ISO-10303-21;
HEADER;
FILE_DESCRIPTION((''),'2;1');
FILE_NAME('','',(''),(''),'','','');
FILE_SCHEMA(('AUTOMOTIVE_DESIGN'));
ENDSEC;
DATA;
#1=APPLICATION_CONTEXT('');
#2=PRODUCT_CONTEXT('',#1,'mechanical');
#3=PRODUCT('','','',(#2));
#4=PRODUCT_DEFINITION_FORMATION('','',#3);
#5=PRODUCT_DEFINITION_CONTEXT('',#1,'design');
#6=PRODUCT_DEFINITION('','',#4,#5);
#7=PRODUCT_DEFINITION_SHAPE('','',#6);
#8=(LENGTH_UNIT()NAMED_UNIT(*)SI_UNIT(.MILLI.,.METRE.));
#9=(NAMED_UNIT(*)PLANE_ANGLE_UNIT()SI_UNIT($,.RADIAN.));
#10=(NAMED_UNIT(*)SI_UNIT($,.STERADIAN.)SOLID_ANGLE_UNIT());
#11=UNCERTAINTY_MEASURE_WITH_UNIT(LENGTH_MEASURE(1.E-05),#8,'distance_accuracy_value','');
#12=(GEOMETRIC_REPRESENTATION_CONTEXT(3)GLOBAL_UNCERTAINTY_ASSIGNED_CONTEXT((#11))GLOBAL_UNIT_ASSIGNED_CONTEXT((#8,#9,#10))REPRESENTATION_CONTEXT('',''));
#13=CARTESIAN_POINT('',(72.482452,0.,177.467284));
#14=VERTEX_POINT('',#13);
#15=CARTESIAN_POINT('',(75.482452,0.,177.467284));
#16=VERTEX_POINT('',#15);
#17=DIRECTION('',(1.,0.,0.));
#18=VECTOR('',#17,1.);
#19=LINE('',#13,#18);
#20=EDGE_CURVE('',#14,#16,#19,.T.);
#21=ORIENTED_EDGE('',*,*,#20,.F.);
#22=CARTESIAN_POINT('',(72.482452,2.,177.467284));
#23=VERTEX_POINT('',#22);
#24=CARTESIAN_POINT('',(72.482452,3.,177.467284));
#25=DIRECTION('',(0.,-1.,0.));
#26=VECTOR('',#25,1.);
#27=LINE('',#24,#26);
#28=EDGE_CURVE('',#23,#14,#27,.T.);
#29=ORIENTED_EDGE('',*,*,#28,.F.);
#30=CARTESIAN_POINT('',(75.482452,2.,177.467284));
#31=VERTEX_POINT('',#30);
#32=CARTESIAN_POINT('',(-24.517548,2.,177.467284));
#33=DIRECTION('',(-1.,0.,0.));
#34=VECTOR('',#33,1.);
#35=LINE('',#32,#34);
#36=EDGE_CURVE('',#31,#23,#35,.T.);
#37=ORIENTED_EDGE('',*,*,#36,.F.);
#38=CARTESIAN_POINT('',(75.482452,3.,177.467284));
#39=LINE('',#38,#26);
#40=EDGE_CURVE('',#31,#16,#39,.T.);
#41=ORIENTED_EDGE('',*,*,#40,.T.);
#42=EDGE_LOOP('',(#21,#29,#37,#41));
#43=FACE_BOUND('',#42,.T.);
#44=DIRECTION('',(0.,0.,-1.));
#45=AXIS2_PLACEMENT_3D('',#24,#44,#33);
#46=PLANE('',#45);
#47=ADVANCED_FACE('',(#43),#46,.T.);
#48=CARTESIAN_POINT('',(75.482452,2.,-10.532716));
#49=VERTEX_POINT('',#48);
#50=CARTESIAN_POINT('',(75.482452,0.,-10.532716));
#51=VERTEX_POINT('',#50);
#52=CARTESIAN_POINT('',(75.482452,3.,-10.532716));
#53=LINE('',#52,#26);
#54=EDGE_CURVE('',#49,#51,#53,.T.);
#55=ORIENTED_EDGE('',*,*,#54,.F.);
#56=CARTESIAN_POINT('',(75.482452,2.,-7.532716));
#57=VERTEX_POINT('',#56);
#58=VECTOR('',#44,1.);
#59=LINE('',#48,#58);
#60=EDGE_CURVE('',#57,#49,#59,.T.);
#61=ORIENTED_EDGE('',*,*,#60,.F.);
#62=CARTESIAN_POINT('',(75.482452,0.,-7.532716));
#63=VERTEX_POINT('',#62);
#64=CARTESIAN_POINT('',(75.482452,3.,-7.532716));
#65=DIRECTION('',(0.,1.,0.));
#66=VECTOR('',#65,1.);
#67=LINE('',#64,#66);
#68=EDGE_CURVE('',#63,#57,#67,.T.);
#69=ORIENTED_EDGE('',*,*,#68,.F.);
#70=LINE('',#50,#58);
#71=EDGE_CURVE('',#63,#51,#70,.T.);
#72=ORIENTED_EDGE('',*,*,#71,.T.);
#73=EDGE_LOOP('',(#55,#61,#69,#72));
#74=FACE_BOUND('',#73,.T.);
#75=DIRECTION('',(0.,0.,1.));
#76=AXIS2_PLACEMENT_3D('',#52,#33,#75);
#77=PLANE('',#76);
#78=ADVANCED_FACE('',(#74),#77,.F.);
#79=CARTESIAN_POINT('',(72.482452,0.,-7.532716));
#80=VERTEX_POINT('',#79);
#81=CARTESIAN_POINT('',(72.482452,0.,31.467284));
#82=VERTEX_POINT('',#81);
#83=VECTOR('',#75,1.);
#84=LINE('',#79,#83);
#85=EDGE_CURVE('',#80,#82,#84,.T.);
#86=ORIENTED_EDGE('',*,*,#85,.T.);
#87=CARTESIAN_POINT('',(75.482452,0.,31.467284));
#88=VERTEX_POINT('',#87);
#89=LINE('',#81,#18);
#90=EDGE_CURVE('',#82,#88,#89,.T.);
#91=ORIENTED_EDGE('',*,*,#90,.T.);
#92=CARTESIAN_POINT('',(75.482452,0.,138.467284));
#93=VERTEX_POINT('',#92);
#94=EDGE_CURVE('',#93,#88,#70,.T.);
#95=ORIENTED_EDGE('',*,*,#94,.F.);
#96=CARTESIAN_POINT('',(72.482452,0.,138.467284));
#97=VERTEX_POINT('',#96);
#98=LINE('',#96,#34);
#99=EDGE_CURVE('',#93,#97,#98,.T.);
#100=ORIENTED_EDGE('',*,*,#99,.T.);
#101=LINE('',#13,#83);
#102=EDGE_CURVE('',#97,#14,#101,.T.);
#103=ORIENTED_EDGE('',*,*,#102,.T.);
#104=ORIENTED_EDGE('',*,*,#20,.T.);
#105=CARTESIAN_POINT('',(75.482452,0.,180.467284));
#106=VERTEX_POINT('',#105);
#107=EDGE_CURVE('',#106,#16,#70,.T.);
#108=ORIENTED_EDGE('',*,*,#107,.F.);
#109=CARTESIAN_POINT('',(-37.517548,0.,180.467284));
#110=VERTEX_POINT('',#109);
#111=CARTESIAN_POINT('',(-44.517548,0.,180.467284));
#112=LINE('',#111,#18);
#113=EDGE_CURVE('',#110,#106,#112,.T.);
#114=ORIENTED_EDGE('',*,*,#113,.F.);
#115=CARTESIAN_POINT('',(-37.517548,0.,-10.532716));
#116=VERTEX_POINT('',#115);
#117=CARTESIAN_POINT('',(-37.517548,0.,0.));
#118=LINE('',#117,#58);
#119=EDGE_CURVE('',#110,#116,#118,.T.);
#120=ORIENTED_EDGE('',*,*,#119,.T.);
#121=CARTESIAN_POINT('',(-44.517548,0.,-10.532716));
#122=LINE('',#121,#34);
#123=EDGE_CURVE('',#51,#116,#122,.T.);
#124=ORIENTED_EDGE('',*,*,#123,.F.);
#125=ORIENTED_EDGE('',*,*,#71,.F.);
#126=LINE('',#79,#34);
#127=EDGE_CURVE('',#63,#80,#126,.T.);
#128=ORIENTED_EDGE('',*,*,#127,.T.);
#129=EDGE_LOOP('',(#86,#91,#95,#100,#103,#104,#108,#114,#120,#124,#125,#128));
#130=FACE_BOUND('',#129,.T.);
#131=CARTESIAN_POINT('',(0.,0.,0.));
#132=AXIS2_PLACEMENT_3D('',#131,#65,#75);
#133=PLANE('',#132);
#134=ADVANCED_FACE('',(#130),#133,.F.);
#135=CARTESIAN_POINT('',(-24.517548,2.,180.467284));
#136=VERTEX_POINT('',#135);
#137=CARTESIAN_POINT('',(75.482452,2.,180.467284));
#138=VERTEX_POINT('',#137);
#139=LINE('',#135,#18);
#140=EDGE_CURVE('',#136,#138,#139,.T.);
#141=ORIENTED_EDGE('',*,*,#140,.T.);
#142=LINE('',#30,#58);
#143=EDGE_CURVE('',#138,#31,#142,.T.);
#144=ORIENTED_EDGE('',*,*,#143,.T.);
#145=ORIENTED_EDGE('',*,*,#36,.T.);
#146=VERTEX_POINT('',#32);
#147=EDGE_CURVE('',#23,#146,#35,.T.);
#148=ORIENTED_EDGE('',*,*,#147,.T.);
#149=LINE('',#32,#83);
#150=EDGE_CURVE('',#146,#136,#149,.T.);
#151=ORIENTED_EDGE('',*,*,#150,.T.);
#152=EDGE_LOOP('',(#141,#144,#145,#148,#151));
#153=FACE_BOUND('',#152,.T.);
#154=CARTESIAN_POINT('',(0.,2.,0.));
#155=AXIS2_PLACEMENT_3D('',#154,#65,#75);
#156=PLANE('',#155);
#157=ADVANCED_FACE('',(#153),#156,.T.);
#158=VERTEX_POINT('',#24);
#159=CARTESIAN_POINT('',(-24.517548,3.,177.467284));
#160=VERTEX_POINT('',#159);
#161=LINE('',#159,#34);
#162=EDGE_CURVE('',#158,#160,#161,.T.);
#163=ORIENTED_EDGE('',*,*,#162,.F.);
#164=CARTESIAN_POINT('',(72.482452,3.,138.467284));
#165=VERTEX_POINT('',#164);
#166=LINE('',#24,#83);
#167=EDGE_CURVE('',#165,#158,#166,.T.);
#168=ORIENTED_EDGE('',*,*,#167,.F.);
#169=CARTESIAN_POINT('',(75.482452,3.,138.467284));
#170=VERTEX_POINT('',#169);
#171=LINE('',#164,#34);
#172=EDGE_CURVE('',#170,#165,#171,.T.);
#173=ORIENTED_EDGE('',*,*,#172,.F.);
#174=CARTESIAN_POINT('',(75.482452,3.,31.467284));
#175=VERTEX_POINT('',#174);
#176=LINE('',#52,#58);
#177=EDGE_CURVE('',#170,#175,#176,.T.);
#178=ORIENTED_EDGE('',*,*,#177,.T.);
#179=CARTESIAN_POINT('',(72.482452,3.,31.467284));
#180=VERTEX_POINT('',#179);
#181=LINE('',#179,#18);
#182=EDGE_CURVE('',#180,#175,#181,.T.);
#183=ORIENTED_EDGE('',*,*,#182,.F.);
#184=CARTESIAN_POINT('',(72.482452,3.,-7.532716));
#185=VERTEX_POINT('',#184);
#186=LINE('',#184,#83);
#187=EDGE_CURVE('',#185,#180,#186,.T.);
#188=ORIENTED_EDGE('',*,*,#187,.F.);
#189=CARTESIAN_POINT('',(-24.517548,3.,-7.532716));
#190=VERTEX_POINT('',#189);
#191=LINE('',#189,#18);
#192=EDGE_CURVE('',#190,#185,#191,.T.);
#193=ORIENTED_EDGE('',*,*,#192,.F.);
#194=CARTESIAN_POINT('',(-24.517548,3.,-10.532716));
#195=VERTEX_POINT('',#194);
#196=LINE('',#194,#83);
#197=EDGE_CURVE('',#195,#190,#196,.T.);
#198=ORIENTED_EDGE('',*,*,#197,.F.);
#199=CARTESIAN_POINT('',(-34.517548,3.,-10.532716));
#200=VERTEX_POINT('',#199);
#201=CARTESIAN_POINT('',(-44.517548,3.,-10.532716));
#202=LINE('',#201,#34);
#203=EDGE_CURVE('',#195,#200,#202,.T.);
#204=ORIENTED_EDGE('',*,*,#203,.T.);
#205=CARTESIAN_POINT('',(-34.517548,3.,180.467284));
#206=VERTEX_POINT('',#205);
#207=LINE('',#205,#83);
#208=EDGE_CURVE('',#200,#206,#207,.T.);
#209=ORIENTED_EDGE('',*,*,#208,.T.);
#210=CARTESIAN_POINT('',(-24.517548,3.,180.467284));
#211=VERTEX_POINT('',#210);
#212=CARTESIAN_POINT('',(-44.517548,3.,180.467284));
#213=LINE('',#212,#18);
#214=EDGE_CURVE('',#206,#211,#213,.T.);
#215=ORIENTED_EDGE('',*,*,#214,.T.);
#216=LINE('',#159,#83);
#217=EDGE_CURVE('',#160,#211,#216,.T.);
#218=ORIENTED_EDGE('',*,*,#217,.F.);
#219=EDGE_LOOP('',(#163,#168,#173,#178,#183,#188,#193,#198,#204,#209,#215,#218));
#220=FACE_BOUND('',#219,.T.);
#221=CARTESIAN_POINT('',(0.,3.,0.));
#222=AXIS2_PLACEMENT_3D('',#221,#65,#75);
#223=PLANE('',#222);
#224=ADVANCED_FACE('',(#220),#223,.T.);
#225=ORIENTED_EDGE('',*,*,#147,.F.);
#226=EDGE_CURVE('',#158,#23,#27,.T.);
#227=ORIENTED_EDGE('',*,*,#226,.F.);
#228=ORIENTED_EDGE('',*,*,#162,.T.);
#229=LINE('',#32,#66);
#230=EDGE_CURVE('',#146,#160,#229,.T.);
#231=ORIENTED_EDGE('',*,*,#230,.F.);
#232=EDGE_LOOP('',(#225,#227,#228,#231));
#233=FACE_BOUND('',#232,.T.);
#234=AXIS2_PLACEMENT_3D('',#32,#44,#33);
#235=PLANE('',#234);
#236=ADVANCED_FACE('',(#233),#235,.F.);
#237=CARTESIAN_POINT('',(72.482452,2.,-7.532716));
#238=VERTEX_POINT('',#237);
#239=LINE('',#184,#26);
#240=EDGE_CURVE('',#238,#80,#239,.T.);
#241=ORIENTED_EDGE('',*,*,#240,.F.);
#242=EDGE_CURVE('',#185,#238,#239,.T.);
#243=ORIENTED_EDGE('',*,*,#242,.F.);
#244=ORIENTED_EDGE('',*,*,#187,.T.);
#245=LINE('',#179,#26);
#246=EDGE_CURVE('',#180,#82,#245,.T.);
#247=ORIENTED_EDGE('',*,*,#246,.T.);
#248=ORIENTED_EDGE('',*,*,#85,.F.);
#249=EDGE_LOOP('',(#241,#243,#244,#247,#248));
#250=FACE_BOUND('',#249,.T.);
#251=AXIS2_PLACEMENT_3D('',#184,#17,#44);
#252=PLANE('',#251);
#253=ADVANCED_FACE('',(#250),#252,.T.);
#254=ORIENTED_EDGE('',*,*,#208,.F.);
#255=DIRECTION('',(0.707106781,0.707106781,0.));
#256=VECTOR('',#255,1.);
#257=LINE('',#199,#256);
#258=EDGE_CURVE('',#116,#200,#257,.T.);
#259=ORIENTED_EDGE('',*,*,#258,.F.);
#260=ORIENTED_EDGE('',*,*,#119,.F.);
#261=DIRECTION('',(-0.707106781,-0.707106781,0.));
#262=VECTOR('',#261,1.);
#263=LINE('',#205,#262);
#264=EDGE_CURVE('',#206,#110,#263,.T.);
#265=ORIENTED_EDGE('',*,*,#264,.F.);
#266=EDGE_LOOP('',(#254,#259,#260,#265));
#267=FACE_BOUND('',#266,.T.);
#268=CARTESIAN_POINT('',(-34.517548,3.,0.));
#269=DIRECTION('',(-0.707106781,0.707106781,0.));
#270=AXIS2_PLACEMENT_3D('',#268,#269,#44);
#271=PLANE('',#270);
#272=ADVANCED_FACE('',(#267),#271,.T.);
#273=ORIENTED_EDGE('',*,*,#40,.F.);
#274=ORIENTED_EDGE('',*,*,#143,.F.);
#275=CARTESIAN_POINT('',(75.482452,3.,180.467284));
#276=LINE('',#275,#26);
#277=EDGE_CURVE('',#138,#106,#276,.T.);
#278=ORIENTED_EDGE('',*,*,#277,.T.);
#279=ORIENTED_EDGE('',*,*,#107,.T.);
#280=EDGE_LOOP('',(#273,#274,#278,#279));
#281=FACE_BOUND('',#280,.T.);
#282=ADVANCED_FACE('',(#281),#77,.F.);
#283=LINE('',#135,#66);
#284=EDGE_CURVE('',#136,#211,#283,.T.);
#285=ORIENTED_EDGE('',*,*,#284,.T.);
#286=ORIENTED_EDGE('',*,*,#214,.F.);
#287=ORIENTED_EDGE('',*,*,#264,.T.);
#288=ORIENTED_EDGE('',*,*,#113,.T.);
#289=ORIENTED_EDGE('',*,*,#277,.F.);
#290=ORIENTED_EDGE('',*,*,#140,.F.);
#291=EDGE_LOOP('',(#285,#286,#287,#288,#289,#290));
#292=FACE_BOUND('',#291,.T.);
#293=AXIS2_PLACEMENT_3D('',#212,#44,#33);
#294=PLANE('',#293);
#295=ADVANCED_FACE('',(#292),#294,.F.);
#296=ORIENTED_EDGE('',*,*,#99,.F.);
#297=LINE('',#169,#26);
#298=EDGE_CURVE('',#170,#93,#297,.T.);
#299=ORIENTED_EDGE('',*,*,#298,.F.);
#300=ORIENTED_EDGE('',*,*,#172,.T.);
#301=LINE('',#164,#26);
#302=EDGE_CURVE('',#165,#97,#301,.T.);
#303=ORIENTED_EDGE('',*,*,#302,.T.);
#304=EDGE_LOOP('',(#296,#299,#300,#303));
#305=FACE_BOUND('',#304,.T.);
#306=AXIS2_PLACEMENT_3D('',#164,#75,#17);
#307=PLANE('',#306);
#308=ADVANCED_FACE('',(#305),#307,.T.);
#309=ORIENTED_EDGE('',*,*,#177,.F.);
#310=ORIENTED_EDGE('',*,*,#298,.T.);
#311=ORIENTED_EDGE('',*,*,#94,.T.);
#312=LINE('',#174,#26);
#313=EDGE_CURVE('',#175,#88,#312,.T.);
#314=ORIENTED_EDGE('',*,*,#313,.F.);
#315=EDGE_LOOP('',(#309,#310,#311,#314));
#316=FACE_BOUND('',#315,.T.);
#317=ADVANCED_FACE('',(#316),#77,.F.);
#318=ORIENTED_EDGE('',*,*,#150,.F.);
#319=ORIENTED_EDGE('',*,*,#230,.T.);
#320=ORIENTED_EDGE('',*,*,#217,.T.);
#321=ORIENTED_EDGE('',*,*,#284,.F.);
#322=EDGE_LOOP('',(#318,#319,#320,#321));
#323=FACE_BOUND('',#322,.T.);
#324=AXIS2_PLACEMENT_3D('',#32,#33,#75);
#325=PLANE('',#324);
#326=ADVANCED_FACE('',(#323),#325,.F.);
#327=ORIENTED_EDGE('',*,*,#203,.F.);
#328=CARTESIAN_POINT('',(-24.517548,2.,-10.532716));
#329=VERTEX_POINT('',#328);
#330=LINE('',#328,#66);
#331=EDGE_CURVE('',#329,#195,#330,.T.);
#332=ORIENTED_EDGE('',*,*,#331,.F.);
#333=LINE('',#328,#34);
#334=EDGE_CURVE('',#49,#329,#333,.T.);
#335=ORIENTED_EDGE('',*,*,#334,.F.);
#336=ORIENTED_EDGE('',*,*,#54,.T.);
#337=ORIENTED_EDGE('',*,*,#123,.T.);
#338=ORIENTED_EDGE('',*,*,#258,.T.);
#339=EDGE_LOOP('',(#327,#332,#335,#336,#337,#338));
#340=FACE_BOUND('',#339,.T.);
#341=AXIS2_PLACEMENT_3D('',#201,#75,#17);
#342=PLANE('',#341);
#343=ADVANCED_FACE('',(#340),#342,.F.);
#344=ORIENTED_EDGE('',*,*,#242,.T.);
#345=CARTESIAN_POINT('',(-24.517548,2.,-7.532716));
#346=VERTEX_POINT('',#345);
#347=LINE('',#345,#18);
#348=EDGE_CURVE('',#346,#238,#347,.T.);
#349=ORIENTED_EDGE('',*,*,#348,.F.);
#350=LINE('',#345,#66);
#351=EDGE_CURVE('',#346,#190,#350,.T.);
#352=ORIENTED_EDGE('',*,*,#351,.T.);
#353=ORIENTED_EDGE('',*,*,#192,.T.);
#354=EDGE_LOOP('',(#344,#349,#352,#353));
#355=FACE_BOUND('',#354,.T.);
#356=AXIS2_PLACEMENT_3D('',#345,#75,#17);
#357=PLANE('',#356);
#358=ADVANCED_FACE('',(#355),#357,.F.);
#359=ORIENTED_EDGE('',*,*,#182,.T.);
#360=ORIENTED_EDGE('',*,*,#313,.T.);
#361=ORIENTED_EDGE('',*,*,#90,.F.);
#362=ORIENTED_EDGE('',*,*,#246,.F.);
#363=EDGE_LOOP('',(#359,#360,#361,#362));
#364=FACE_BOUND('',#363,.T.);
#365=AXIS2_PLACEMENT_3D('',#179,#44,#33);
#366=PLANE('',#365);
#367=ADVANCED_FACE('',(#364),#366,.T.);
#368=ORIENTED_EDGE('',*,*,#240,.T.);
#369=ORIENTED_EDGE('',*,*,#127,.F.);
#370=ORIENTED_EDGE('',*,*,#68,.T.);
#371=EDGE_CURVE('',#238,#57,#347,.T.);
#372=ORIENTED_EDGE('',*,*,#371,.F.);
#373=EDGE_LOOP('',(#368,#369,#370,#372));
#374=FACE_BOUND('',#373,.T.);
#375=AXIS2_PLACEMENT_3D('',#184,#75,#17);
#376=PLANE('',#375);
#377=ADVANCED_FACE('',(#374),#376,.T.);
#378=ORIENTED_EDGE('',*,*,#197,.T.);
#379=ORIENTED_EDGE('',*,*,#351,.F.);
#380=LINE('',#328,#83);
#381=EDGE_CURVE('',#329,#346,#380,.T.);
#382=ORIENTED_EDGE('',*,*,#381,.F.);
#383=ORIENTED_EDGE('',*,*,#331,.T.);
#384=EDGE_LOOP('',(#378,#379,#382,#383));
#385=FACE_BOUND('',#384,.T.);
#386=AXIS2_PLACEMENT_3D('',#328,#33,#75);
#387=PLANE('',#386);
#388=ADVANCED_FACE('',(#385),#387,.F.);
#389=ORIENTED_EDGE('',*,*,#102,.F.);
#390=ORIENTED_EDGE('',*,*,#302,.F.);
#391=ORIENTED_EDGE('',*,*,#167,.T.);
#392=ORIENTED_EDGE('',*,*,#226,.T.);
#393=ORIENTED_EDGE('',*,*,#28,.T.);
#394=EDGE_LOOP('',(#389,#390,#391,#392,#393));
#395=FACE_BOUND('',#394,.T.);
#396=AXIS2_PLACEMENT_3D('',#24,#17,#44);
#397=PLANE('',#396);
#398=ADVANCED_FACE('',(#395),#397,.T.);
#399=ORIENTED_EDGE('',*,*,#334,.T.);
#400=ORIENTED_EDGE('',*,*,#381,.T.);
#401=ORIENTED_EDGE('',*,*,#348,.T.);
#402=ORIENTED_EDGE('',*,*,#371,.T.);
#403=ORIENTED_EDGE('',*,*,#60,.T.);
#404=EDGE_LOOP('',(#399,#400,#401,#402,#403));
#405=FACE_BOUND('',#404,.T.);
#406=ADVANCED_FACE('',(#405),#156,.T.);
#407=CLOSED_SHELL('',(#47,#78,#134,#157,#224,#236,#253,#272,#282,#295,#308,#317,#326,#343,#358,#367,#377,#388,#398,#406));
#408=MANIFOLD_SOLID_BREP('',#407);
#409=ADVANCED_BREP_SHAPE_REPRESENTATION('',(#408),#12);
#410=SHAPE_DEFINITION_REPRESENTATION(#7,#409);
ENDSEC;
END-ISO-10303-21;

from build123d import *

# Parameters (mm, degrees)
SKETCH_1_W          = 120
SKETCH_1_H          = 191
EXTRUDE_2_DEPTH     = 3
CHAMFER_7_SIZE      = 10
SKETCH_3_W          = 100
SKETCH_3_H          = 3
CUT_EXTRUDE_4_DEPTH = 1
SKETCH_6_W          = 3.195264444
SKETCH_6_H          = 39
CUT_EXTRUDE_5_DEPTH = 196.640080888
SKETCH_8_W          = 3
SKETCH_8_H          = 39
CUT_EXTRUDE_6_DEPTH = 196.640080888


with BuildPart() as part:
    # 草图1 → 凸台-拉伸2 (new body)
    with BuildSketch(Plane(origin=(0, 0, 0), x_dir=(1, 0, 0), z_dir=(0, 1, 0))):
        with Locations((15.482452441, -84.96728408)):
            Rectangle(SKETCH_1_W, SKETCH_1_H)
    extrude(amount=EXTRUDE_2_DEPTH)

    # 倒角7
    # the kernel refuses this chamfer: 10 mm, written as the material it takes off along each edge
    with BuildSketch(Plane(origin=(-44.517547559, 3, 206.18411396), x_dir=(-0.027495876610586317, -0.9996219169112968, 0), z_dir=(0, 0, -1))) as chamfer_7_piece_1:
        Polygon((CHAMFER_7_SIZE * 0.999621916911, -CHAMFER_7_SIZE * 0.0274958766106), (-CHAMFER_7_SIZE * 0.0274958766106, -CHAMFER_7_SIZE * 0.999621916911), (0, 0), align=None)
    extrude(amount=242.433659759, mode=Mode.SUBTRACT)

    # 草图3 → 切除-拉伸4 (cut)
    with BuildSketch(Plane(origin=(0, 3, 0), x_dir=(1, 0, 0), z_dir=(0, 1, 0))):
        with Locations((25.482452441, -178.96728408)):
            Rectangle(SKETCH_3_W, SKETCH_3_H)
        with Locations((25.482452441, 9.03271592)):
            Rectangle(SKETCH_3_W, SKETCH_3_H)
    extrude(amount=-CUT_EXTRUDE_4_DEPTH, mode=Mode.SUBTRACT)

    # 草图6 → 切除-拉伸5 (cut, through all)
    with BuildSketch(Plane(origin=(0, 0, 0), x_dir=(1, 0, 0), z_dir=(0, 1, 0))):
        with Locations((74.080084663, -11.96728408)):
            Rectangle(SKETCH_6_W, SKETCH_6_H)
    extrude(amount=CUT_EXTRUDE_5_DEPTH, mode=Mode.SUBTRACT)

    # 草图8 → 切除-拉伸6 (cut, through all)
    with BuildSketch(Plane(origin=(0, 0, 0), x_dir=(1, 0, 0), z_dir=(0, 1, 0))):
        with Locations((73.982452441, -157.96728408)):
            Rectangle(SKETCH_8_W, SKETCH_8_H)
    extrude(amount=CUT_EXTRUDE_6_DEPTH, mode=Mode.SUBTRACT)


solid = part.part
